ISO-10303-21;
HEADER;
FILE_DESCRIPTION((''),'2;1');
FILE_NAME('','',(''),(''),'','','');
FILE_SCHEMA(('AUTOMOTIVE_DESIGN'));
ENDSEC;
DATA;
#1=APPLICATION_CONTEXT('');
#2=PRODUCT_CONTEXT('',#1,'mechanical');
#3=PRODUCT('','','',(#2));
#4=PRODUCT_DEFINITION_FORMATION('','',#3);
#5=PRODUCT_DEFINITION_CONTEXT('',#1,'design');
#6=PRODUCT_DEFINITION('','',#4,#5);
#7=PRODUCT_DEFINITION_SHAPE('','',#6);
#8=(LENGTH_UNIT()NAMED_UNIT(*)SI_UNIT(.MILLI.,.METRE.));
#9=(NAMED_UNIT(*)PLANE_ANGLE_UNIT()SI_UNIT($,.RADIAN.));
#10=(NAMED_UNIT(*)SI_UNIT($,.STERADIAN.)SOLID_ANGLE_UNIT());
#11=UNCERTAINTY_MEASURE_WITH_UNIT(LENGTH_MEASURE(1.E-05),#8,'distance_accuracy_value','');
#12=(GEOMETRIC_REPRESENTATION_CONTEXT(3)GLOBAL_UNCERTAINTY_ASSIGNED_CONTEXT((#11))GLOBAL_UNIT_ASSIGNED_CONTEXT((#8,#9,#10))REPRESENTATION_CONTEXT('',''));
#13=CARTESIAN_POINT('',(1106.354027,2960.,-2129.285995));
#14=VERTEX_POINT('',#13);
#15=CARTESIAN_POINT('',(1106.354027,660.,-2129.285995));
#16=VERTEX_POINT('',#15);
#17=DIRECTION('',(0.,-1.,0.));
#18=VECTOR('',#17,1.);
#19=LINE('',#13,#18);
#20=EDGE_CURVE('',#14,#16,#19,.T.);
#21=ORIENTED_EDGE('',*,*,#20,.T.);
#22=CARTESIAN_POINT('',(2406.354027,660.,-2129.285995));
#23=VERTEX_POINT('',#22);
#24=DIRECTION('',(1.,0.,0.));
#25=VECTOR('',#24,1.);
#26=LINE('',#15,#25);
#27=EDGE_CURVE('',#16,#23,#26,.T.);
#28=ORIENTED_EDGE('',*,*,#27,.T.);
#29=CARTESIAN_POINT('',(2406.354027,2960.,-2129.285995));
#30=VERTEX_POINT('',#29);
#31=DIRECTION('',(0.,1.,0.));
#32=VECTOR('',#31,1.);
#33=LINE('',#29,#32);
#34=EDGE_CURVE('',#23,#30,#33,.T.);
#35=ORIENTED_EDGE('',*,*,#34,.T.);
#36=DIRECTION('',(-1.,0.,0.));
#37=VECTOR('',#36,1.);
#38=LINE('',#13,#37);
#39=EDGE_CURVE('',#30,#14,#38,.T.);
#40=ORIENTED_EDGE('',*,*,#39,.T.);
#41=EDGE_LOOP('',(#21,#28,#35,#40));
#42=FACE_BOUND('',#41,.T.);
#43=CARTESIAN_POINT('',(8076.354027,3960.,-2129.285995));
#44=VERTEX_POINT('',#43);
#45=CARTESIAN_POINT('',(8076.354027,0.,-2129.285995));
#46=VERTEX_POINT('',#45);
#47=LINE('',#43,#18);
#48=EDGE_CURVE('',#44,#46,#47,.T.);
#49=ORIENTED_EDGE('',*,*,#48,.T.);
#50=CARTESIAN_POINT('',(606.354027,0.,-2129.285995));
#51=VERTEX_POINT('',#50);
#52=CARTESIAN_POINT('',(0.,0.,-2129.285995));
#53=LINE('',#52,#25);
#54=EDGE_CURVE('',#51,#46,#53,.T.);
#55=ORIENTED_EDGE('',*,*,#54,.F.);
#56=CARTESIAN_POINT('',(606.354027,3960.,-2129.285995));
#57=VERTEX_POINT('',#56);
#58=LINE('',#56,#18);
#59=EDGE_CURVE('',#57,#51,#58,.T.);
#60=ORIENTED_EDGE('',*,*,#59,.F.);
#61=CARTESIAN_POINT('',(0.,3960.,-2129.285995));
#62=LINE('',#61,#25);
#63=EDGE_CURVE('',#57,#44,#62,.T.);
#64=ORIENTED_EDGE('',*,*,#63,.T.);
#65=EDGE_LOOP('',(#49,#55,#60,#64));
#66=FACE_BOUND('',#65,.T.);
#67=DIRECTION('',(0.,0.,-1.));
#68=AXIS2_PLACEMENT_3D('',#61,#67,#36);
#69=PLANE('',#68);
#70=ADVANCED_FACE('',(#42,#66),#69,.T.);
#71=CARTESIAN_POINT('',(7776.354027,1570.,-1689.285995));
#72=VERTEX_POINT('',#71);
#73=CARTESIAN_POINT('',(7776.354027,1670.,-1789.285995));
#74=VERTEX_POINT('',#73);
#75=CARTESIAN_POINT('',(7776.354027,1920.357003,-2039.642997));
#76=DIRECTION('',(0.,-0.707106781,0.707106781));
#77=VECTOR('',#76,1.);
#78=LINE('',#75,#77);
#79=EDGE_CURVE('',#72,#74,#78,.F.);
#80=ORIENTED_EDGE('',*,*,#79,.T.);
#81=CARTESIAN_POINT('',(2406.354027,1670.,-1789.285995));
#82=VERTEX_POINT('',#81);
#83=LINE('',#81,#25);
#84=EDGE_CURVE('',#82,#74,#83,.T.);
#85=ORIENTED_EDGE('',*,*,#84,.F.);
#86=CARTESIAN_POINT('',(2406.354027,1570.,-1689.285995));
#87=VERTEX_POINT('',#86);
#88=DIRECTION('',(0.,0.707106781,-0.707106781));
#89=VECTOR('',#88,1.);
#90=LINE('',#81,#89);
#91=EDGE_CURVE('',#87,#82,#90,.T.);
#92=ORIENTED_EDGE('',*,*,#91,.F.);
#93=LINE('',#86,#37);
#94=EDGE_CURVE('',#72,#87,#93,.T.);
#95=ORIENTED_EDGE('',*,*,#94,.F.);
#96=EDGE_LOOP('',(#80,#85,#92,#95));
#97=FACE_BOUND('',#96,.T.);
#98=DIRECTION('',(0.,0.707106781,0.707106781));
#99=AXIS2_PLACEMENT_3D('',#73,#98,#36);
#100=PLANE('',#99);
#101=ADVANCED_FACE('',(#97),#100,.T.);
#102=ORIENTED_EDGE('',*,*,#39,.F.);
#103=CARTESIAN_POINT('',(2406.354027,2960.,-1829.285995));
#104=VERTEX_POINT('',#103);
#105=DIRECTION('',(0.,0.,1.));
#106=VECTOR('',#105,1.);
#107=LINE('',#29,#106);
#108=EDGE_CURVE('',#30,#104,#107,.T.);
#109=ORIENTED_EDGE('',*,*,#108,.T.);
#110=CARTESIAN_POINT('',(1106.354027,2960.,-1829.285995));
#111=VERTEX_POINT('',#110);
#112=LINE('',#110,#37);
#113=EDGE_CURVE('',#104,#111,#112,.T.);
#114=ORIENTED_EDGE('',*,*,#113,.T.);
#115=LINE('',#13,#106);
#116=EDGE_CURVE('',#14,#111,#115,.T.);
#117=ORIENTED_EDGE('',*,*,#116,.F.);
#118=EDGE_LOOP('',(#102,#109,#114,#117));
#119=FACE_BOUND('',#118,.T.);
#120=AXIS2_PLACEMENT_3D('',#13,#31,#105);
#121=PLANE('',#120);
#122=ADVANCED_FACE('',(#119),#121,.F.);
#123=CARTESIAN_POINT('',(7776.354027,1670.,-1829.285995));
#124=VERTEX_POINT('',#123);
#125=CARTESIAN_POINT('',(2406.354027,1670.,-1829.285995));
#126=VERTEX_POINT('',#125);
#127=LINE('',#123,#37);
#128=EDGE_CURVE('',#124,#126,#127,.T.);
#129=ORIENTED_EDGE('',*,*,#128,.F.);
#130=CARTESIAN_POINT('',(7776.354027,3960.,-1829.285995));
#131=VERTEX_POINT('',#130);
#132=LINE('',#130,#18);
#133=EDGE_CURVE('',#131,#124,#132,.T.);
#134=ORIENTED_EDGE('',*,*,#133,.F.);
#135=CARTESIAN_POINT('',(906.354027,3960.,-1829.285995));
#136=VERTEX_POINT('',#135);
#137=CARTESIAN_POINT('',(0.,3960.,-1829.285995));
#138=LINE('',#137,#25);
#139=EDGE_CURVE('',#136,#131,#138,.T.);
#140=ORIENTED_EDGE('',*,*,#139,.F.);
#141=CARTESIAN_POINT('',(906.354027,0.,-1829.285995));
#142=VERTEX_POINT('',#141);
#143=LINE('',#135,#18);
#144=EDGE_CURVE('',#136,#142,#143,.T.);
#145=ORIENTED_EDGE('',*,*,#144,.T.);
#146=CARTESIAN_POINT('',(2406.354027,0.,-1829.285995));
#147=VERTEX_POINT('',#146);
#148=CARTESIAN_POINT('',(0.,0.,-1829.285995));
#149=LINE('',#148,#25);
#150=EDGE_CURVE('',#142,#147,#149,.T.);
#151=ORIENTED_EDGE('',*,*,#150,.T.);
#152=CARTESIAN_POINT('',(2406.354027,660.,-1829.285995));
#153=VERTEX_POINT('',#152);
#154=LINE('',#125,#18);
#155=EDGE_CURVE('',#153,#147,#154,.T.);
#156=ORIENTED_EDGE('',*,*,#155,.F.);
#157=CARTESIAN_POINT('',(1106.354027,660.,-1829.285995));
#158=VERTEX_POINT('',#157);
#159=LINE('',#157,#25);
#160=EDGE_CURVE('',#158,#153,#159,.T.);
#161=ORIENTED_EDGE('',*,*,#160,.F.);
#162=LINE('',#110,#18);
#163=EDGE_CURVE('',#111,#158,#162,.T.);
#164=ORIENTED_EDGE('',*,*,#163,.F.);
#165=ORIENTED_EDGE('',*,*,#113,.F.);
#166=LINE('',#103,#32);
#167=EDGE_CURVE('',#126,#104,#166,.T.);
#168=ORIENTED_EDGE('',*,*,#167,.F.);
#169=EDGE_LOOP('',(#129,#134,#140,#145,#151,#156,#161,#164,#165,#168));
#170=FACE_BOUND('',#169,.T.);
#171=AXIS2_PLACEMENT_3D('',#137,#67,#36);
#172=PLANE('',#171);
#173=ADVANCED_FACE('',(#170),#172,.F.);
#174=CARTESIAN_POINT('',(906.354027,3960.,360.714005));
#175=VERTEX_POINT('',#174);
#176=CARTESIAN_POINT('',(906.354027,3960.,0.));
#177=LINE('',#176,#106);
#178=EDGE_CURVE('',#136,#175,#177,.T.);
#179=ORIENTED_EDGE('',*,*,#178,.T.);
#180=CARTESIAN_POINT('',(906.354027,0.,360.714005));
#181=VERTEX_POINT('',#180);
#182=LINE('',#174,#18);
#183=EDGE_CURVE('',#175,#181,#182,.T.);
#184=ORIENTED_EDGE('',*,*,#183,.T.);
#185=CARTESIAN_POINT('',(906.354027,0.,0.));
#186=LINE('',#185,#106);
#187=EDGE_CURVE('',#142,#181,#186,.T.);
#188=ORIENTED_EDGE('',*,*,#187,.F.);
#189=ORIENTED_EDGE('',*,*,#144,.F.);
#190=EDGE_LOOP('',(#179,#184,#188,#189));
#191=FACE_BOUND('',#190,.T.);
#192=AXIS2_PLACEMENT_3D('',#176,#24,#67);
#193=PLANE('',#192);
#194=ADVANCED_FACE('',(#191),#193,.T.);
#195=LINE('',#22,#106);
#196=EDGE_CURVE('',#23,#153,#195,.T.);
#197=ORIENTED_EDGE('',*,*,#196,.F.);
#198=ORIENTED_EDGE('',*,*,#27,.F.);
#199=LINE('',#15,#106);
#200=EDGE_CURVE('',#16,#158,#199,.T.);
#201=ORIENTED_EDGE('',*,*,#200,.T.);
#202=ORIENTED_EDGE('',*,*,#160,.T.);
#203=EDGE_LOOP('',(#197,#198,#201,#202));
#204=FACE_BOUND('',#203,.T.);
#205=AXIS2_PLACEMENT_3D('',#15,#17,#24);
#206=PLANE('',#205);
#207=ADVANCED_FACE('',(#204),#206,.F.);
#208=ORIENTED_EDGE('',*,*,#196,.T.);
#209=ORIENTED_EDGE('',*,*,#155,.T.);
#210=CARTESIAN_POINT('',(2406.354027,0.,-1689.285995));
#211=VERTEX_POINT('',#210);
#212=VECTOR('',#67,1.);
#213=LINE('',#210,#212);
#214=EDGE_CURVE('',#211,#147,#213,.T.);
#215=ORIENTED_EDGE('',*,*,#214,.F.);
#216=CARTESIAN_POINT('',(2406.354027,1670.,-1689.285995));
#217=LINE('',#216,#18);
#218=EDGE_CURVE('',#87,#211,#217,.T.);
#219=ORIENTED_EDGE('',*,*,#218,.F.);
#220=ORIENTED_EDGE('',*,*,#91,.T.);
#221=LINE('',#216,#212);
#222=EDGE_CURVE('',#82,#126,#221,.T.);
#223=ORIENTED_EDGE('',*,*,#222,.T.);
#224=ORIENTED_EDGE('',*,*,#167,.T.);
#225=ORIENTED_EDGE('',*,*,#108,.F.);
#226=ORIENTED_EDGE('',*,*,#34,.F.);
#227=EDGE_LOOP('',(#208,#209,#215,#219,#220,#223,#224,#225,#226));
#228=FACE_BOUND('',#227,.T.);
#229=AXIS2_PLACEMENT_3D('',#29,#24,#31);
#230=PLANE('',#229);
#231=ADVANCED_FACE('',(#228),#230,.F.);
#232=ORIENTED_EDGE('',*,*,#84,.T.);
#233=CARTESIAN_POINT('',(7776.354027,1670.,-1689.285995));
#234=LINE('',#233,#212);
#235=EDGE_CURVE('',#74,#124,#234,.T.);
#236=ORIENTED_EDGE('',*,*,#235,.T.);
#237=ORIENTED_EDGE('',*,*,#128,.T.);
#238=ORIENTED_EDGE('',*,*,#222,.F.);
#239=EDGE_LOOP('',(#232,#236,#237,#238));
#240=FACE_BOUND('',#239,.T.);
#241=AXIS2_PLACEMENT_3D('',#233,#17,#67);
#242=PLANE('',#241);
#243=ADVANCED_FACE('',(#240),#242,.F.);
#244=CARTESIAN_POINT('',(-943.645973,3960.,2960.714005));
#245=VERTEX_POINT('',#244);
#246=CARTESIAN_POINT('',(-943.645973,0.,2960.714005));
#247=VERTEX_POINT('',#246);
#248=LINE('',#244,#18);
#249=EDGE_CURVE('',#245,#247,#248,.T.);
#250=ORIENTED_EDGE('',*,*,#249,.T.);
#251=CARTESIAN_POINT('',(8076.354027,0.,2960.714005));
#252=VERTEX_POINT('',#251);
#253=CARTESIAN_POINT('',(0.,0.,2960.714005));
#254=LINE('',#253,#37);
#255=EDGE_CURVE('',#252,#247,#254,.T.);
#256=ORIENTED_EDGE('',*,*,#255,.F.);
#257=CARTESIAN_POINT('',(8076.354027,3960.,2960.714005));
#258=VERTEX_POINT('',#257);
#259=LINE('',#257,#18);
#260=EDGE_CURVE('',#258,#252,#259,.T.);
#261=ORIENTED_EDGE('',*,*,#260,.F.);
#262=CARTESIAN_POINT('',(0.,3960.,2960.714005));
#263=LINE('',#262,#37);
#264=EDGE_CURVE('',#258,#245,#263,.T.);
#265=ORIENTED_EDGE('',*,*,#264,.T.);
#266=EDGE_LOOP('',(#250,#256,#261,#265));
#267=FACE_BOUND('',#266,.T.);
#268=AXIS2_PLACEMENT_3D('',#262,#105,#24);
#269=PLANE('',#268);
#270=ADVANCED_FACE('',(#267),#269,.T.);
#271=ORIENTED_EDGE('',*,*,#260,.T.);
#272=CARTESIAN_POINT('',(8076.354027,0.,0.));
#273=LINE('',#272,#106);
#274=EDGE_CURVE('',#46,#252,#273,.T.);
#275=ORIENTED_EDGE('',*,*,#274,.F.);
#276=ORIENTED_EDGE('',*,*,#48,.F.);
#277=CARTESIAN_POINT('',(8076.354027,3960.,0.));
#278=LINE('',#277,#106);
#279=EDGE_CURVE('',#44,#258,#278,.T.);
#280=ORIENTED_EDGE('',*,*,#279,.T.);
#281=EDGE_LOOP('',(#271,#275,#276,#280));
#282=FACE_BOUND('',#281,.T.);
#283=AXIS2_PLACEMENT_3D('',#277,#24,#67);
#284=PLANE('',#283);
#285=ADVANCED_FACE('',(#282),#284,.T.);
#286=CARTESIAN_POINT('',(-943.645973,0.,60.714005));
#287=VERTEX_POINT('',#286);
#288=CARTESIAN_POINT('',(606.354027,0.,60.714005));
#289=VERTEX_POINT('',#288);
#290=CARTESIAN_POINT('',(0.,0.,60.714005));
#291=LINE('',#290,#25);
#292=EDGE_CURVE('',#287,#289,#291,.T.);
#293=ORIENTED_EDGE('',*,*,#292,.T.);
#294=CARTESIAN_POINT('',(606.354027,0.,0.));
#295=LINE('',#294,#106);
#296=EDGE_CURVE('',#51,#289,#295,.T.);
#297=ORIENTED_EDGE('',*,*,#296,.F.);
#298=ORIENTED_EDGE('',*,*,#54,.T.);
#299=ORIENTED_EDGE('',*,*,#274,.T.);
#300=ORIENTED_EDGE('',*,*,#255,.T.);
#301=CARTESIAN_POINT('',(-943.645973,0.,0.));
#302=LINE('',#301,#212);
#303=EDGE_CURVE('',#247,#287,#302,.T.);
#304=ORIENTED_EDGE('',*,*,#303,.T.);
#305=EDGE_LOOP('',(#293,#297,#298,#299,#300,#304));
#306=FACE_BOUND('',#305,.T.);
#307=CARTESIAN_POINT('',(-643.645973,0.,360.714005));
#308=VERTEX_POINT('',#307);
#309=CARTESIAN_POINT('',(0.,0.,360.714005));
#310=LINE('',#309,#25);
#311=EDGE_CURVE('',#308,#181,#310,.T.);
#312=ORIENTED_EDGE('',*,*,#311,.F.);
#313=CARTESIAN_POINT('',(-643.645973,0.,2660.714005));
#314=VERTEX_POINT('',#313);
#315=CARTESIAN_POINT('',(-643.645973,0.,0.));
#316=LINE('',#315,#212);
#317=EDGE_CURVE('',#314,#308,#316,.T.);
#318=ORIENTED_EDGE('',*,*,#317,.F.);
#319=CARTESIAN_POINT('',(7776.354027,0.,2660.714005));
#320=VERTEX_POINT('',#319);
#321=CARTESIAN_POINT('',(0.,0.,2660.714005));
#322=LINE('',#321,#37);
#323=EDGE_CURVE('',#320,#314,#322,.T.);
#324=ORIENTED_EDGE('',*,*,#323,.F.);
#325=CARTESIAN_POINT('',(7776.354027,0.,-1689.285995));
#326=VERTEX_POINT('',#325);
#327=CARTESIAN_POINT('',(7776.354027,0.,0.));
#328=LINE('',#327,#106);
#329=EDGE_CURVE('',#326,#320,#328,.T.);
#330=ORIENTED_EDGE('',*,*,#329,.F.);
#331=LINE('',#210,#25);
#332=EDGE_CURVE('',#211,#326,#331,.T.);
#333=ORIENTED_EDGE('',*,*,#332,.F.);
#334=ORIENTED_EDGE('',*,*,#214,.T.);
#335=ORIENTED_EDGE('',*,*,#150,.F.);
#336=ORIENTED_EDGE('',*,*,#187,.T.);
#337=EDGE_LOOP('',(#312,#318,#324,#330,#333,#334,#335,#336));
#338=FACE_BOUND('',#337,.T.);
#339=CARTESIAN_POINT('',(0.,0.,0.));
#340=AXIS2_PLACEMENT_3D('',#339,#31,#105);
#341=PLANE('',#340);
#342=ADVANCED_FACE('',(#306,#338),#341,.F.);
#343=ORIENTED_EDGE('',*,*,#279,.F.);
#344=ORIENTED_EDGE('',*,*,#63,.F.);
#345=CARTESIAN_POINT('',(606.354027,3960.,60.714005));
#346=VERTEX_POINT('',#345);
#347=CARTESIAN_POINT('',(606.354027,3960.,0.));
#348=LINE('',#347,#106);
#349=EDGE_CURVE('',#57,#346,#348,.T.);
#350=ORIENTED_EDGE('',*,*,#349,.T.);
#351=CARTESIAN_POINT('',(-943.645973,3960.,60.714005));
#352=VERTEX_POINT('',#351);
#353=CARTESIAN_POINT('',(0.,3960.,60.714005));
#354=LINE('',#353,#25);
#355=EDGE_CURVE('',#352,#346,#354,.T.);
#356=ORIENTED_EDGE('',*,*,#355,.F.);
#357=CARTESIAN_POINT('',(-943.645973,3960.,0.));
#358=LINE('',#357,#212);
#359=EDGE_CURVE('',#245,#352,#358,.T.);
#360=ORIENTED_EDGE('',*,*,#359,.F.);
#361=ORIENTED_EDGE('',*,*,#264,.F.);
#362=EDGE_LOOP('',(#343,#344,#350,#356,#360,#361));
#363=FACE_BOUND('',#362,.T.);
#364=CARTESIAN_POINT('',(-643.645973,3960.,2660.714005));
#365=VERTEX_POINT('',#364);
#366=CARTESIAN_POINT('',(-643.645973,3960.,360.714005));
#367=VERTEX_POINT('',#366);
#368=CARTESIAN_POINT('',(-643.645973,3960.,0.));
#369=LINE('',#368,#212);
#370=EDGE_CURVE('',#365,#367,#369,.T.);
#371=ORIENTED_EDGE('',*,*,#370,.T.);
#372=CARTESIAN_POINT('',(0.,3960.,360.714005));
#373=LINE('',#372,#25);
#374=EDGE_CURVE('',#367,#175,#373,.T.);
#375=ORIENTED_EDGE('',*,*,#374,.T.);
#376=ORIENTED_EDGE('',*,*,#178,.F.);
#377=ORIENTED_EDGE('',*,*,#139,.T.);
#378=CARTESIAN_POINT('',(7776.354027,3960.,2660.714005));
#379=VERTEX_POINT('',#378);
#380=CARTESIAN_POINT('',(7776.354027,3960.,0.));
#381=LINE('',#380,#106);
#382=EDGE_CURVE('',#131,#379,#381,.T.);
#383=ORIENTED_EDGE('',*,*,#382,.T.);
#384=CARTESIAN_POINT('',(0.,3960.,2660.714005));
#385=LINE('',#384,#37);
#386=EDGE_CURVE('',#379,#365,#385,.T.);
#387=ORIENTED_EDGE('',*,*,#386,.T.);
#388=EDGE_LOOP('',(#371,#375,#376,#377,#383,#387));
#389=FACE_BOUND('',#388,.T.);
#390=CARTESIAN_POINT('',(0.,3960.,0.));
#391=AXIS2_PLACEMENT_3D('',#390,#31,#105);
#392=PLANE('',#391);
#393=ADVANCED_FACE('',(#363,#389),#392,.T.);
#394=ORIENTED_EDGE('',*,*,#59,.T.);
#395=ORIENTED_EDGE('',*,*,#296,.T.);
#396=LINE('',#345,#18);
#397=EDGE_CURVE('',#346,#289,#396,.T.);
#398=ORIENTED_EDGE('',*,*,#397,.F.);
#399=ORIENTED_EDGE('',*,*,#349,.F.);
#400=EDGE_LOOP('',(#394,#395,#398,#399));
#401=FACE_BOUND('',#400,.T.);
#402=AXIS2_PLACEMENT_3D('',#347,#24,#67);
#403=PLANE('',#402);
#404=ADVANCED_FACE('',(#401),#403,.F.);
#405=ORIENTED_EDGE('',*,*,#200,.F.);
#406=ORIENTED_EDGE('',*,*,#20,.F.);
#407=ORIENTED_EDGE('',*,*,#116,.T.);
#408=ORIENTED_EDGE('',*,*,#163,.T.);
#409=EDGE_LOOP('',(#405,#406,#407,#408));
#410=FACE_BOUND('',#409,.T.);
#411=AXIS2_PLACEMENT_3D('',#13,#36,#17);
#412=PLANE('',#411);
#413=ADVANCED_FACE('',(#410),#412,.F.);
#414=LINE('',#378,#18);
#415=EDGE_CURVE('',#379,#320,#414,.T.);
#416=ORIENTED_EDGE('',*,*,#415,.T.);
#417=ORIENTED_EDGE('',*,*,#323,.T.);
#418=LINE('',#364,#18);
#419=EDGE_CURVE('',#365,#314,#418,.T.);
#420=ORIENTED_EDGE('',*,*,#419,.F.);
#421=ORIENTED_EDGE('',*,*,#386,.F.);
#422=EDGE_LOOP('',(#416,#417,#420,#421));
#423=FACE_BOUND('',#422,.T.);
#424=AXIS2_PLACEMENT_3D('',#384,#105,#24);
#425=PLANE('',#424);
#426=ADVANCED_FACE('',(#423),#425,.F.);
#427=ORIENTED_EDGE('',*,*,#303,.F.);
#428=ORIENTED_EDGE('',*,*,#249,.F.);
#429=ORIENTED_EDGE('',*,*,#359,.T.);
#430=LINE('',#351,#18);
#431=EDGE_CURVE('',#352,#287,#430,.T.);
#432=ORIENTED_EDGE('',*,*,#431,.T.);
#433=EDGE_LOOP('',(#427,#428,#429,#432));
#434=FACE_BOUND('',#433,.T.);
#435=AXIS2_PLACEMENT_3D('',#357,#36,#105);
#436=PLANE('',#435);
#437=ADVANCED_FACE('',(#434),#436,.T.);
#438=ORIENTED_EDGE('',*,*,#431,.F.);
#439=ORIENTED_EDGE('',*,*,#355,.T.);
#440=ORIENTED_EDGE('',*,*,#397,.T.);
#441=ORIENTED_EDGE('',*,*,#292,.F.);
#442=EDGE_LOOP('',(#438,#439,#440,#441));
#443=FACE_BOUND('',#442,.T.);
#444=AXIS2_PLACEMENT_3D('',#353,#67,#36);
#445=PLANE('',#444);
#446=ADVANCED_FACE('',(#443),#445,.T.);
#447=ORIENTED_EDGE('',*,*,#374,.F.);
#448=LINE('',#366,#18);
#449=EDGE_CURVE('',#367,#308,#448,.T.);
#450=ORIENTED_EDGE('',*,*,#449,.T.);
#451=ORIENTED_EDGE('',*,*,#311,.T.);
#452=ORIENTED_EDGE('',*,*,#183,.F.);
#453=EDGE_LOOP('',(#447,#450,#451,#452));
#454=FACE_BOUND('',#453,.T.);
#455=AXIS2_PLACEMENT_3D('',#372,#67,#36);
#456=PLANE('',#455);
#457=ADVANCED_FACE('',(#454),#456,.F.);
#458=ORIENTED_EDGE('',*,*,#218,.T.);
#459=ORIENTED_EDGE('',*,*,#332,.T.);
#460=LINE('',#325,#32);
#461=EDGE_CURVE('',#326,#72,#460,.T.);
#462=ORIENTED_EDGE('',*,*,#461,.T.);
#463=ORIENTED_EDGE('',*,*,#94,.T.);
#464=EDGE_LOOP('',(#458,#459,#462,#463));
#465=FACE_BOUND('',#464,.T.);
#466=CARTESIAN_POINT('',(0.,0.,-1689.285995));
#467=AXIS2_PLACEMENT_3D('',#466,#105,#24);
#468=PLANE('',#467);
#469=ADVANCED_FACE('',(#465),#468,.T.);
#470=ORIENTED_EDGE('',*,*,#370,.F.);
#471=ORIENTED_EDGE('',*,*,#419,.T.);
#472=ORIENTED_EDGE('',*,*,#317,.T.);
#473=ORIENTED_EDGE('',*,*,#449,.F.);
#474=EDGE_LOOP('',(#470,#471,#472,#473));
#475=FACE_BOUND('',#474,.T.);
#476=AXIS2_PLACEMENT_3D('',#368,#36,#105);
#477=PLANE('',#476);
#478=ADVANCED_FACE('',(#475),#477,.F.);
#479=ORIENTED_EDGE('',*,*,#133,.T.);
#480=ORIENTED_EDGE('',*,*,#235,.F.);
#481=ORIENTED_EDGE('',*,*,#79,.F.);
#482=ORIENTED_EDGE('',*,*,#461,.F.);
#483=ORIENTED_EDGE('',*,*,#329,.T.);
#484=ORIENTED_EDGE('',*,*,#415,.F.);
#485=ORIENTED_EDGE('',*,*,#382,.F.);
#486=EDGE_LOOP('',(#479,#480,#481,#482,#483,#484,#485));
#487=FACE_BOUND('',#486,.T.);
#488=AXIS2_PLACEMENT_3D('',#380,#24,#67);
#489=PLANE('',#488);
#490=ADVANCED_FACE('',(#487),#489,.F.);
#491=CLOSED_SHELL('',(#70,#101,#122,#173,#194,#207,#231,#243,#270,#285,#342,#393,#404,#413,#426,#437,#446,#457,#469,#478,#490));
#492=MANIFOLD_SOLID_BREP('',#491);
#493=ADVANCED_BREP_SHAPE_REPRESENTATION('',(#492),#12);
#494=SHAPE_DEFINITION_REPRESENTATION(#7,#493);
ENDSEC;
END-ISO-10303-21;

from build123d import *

# Parameters (mm, degrees)
SKETCH_1_W          = 6870
SKETCH_1_H          = 300
EXTRUDE_1_DEPTH     = 3960
SKETCH_3_W          = 1300
SKETCH_3_H          = 2300
CUT_EXTRUDE_1_DEPTH = 300
SKETCH_4_W          = 5370
SKETCH_4_H          = 1670
EXTRUDE_2_DEPTH     = 140
FILLET_START        = -84.347935733
FILLET_1_OUTLINE_W  = 5370
FILLET_1_OUTLINE_H  = 141.421356237
FILLET_1_DEPTH      = 71.347935733


with BuildPart() as part:
    # Эскиз1 → Бобышка-Вытянуть1 (new body)
    with BuildSketch(Plane(origin=(0, 0, 0), x_dir=(1, 0, 0), z_dir=(0, 1, 0))):
        Polygon((8076.35402749, -2660.714005328), (7776.35402749, -2660.714005328), (7776.35402749, 1829.285994672), (7776.35402749, 2129.285994672), (8076.35402749, 2129.285994672), align=None)
        with Locations((4341.35402749, 1979.285994672)):
            Rectangle(SKETCH_1_W, SKETCH_1_H)
        Polygon((-643.64597251, -2960.714005328), (-643.64597251, -2660.714005328), (7776.35402749, -2660.714005328), (8076.35402749, -2660.714005328), (8076.35402749, -2960.714005328), align=None)
        Polygon((-943.64597251, -360.714005328), (-643.64597251, -360.714005328), (-643.64597251, -2660.714005328), (-643.64597251, -2960.714005328), (-943.64597251, -2960.714005328), align=None)
        Polygon((-943.64597251, -60.714005328), (606.35402749, -60.714005328), (606.35402749, 2129.285994672), (906.35402749, 2129.285994672), (906.35402749, 1829.285994672), (906.35402749, -360.714005328), (-643.64597251, -360.714005328), (-943.64597251, -360.714005328), align=None)
    extrude(amount=EXTRUDE_1_DEPTH)

    # Эскиз3 → Вырез-Вытянуть1 (cut)
    with BuildSketch(Plane.XY.offset(-1829.285994672)):
        with Locations((1756.35402749, 1810)):
            Rectangle(SKETCH_3_W, SKETCH_3_H)
    extrude(amount=-CUT_EXTRUDE_1_DEPTH, mode=Mode.SUBTRACT)

    # Эскиз4 → Бобышка-Вытянуть2 (add)
    with BuildSketch(Plane.XY.offset(-1829.285994672)):
        with Locations((5091.35402749, 835)):
            Rectangle(SKETCH_4_W, SKETCH_4_H)
    extrude(amount=EXTRUDE_2_DEPTH)

    # Фаска1: read off the stored shape, not the designer's step
    # Фаска1 outline → Фаска1 (cut)
    with BuildSketch(Plane(origin=(0, 0, 0), x_dir=(1, 0, 0), z_dir=(0, 0.7071067811865476, 0.7071067811865476)).offset(FILLET_START)):
        with Locations((5091.35402749, 2375.373906778)):
            Rectangle(FILLET_1_OUTLINE_W, FILLET_1_OUTLINE_H)
    extrude(amount=FILLET_1_DEPTH, mode=Mode.SUBTRACT)


solid = part.part
